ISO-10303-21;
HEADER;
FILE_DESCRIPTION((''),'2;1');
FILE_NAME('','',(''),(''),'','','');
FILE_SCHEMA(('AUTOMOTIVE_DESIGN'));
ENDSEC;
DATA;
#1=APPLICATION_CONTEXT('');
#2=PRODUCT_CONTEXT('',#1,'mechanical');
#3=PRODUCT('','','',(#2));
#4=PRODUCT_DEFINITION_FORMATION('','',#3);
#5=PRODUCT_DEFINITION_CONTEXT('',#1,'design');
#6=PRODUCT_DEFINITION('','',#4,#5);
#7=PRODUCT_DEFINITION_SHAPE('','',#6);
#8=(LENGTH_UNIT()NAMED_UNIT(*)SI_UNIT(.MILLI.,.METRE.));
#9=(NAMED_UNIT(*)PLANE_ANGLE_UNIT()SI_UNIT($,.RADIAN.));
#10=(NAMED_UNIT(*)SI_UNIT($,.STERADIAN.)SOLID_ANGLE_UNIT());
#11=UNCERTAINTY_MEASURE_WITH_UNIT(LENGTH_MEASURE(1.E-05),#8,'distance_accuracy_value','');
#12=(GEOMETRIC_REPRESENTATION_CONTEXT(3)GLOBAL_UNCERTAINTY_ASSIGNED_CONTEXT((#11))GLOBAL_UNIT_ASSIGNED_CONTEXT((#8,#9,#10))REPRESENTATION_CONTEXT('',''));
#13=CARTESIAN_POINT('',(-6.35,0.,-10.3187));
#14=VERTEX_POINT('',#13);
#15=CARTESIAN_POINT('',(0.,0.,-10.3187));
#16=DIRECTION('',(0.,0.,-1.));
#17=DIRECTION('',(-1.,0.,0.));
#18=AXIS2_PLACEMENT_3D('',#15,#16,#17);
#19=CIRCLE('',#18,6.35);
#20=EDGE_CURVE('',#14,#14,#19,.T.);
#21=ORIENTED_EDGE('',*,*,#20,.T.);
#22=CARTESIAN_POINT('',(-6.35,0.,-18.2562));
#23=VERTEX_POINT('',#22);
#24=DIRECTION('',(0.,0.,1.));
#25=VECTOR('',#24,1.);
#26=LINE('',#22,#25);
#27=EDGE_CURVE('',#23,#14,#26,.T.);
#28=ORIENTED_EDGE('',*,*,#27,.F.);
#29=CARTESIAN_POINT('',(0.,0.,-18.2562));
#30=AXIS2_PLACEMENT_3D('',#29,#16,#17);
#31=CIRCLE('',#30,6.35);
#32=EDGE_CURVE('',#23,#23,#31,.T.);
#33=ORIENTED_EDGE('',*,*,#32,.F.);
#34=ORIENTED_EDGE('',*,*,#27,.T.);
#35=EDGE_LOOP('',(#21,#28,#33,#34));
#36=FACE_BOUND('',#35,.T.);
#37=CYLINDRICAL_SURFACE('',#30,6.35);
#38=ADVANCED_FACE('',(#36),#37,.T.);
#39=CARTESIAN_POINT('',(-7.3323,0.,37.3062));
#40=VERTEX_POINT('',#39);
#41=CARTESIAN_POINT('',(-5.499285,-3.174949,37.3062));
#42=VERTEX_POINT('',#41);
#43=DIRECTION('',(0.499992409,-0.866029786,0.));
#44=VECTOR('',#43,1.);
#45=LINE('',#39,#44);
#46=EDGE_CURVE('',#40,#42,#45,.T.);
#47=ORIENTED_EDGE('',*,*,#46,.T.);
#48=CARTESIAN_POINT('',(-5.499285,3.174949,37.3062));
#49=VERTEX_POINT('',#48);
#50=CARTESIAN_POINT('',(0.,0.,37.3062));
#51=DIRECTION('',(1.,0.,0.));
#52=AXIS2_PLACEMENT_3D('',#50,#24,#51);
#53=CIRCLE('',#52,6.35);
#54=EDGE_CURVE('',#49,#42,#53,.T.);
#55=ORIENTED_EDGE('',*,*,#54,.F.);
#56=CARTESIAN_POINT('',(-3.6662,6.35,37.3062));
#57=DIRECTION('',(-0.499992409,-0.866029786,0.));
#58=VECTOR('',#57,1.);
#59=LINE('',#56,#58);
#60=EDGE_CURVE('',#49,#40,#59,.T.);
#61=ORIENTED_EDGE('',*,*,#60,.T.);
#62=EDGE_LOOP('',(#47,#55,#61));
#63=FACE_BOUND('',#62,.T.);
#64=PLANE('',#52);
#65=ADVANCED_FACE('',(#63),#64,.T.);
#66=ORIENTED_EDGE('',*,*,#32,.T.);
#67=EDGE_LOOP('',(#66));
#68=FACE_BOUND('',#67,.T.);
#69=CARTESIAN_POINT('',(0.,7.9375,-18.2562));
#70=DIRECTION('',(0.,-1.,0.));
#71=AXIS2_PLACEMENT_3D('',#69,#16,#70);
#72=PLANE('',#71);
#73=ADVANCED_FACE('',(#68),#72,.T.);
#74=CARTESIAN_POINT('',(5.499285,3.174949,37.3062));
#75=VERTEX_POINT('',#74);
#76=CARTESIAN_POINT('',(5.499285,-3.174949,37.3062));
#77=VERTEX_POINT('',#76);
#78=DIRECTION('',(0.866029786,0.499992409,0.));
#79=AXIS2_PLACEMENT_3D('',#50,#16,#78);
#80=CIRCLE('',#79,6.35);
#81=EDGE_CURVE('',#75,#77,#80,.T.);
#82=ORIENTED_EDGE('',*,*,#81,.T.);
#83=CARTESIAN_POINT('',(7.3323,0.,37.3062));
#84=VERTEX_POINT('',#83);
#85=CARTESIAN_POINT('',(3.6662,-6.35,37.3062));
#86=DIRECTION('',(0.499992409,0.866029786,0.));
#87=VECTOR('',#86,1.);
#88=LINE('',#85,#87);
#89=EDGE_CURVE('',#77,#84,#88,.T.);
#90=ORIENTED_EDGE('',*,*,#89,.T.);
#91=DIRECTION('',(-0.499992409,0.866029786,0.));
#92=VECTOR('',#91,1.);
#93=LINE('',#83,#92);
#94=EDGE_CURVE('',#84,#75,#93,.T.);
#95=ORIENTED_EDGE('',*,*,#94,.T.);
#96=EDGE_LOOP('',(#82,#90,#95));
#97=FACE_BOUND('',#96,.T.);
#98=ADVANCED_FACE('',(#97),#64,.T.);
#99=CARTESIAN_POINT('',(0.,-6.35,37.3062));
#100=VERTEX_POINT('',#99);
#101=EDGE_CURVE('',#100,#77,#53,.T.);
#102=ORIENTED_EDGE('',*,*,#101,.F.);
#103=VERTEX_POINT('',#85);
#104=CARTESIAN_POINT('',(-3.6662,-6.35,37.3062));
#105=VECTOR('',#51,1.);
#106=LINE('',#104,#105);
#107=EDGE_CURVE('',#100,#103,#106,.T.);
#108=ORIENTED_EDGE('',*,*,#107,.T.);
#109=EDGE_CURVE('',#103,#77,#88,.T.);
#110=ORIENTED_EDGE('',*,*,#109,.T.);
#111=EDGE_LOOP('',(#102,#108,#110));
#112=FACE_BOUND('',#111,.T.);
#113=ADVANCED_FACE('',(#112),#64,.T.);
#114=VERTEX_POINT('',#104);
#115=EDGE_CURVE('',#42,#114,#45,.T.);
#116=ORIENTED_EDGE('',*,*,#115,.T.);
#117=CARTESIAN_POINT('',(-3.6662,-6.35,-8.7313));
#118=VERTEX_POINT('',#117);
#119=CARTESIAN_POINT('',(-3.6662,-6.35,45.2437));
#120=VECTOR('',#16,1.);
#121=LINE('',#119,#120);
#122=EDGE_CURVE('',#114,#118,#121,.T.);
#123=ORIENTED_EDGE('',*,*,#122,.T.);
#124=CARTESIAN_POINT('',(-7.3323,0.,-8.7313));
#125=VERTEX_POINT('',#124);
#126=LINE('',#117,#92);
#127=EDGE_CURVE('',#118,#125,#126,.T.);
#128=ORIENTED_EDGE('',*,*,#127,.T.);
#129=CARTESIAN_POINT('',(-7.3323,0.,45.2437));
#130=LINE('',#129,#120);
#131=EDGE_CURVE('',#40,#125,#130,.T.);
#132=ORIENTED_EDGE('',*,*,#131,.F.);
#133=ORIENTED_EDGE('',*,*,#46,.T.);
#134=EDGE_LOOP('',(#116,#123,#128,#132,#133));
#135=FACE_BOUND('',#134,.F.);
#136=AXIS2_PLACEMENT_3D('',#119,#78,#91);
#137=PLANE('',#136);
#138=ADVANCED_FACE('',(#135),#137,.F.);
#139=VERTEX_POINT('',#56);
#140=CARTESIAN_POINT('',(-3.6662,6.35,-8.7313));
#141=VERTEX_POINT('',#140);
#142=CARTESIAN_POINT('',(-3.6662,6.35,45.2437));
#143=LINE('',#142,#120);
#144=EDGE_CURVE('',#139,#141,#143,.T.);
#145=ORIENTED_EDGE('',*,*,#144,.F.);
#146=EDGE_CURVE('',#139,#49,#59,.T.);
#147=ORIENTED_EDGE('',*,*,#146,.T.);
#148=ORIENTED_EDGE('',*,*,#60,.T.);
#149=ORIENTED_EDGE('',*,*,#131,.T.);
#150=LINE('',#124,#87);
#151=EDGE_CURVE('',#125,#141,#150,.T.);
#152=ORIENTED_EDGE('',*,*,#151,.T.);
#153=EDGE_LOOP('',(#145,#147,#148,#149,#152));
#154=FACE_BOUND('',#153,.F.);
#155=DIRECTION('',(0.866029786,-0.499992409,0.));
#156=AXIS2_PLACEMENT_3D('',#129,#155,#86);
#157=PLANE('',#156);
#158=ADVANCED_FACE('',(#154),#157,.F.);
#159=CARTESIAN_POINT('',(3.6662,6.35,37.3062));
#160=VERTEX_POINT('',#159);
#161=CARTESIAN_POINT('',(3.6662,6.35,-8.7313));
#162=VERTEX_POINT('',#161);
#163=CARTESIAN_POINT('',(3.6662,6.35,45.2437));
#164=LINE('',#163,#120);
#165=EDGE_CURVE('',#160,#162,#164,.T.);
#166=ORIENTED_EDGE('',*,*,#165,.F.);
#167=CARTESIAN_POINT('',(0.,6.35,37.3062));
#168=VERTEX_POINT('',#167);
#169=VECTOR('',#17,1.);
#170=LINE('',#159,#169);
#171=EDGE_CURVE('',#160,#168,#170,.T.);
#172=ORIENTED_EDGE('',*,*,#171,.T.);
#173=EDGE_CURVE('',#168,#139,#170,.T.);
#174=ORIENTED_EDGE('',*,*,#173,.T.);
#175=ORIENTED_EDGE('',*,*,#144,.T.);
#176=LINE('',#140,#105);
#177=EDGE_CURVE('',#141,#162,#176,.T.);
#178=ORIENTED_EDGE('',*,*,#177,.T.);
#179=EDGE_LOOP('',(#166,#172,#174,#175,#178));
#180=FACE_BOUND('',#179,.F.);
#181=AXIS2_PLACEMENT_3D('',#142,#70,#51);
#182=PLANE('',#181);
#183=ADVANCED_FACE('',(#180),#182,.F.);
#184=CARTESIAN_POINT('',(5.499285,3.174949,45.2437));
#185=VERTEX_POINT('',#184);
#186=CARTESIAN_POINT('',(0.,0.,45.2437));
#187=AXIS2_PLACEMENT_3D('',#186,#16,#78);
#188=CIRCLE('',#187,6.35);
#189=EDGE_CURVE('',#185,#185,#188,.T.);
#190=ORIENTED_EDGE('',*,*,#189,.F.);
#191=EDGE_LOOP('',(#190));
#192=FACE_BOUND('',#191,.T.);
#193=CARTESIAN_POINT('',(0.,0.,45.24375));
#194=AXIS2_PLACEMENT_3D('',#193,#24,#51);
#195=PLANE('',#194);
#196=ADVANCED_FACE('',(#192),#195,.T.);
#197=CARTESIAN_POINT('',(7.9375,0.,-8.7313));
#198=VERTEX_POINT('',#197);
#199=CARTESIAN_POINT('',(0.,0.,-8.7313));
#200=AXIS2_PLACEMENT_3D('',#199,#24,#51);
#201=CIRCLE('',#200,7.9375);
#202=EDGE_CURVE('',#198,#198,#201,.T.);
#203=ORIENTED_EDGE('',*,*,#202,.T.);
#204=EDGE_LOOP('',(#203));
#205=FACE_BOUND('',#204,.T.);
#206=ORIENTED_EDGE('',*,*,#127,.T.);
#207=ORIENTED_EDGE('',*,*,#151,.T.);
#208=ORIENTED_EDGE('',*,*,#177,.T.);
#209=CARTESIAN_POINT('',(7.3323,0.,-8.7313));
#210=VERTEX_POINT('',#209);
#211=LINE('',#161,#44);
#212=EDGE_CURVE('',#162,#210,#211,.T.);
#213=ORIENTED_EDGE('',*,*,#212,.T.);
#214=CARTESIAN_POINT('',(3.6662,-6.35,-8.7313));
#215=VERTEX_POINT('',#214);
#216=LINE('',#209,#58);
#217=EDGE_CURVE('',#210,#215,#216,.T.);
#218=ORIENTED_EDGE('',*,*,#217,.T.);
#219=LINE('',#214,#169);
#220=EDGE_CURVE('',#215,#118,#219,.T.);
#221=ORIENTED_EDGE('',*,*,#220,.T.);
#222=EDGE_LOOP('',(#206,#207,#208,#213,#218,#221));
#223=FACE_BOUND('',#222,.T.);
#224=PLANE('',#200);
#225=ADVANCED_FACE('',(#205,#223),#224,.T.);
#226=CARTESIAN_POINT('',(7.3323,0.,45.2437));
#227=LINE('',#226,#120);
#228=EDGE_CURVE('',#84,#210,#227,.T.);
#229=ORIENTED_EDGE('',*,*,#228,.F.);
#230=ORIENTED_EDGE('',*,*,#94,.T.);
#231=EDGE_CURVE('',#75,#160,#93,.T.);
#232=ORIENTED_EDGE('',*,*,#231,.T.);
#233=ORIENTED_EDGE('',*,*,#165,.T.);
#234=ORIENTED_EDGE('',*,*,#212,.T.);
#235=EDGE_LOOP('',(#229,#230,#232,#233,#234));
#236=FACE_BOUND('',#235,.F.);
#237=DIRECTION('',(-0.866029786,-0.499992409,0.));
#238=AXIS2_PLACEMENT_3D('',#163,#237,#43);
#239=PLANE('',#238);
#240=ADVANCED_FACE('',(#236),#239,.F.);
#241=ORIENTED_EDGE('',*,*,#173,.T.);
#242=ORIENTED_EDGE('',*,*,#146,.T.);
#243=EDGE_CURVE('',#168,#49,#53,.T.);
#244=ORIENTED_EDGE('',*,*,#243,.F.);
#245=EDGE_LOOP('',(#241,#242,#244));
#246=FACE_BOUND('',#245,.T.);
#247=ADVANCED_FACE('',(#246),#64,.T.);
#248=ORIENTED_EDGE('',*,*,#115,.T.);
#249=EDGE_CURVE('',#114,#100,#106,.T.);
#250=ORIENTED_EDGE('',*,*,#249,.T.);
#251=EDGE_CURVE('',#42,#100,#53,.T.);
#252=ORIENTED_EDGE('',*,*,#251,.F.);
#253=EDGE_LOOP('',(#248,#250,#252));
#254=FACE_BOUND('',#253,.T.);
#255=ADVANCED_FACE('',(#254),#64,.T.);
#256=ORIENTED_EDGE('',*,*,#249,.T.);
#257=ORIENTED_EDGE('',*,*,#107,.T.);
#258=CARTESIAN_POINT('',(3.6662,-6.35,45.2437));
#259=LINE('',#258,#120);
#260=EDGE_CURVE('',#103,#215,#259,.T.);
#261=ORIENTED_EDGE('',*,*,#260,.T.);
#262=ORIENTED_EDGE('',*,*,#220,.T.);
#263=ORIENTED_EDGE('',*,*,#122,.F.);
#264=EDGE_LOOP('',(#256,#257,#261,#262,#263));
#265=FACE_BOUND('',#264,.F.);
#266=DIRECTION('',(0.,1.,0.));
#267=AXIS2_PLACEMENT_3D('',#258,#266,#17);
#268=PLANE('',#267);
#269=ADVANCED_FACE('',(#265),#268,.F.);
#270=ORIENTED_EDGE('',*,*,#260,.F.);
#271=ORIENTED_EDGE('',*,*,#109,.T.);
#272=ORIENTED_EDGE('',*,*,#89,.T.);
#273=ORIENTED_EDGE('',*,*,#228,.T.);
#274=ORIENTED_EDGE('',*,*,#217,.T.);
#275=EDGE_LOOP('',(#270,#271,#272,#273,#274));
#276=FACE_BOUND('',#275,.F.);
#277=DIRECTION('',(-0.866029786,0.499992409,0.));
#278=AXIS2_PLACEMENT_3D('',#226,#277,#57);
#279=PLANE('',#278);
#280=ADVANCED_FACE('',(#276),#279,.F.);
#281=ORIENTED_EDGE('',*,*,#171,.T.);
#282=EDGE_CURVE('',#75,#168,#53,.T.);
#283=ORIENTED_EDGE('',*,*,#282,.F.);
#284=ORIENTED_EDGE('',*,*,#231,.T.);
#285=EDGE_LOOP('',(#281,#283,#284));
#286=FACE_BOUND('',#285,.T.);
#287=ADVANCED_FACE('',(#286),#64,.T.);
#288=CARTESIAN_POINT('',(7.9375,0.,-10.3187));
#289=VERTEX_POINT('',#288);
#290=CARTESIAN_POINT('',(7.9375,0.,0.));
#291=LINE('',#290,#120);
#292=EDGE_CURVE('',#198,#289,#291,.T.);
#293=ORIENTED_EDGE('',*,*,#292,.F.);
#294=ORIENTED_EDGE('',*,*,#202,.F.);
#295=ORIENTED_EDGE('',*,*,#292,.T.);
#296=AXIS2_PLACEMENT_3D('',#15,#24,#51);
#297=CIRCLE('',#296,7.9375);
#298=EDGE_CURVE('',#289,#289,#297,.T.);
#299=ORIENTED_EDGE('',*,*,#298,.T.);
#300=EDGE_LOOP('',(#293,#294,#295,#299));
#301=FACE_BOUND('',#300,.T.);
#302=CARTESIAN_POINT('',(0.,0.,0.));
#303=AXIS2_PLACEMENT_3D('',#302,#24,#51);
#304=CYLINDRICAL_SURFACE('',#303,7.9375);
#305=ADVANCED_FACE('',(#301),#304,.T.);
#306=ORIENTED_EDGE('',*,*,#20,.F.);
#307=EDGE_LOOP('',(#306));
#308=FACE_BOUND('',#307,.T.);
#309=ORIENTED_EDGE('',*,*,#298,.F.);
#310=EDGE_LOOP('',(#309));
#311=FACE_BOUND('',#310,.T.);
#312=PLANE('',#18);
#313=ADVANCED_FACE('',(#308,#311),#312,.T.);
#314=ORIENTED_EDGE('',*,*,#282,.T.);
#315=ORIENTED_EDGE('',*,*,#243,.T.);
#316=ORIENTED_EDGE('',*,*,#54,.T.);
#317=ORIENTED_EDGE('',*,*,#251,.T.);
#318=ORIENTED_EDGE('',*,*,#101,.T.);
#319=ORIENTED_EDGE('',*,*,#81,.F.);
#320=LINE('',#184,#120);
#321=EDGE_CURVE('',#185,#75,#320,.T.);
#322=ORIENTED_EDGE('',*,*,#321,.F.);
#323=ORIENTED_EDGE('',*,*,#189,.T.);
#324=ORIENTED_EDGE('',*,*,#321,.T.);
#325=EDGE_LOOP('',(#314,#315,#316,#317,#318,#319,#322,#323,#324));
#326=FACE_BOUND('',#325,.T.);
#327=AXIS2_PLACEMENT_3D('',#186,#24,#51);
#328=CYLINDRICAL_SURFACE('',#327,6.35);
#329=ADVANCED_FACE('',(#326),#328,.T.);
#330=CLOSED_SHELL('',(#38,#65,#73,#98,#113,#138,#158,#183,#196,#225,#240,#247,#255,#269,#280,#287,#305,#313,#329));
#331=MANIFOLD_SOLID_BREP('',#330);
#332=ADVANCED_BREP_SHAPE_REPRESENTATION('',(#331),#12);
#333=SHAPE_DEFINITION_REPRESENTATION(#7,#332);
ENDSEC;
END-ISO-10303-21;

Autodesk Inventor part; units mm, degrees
ref_plane "YZ Plane" through (0, 0, 0) normal (1, 0, 0) x (0, 1, 0)
ref_plane "XZ Plane" through (0, 0, 0) normal (0, 1, 0) x (-1, 0, 0)
ref_plane "XY Plane" through (0, 0, 0) normal (0, 0, 1) x (1, 0, 0)
sketch "Sketch1" plane through (0, 0, 0) normal (0, 0, 1) x (1, 0, 0)
  circle A0 centre (0, 0) radius 7.9375
  dimension "d0" = 15.875
extrude "Extrusion1" add sketch "Sketch1" along normal mid plane 90.4875
sketch "Sketch2" plane through (0, 0, 45.2437) normal (0, 0, 1) x (1, 0, 0)
  line L0 (-3.6662, 6.35) -> (3.6662, 6.35)
  line L1 (3.6662, 6.35) -> (7.3323, 0)
  line L2 (7.3323, 0) -> (3.6662, -6.35)
  line L3 (3.6662, -6.35) -> (-3.6662, -6.35)
  line L4 (-3.6662, -6.35) -> (-7.3323, 0)
  line L5 (-7.3323, 0) -> (-3.6662, 6.35)
  circle A0 centre (0, 0) radius 7.9375 projected
  point P0 (0, -6.35)
  point P1 (0, 6.35)
  dimension "d3" = 12.7
extrude "Extrusion2" cut sketch "Sketch2" against normal blind 53.975
sketch "Sketch3" plane through (0, 0, 45.2437) normal (0, 0, 1) x (1, 0, 0)
  circle A0 centre (0, 0) radius 6.35
  circle A1 centre (0, 0) radius 7.9375 projected
  line L0 (3.6662, 6.35) -> (-3.6662, 6.35) projected
  line L1 (7.3323, 0) -> (3.6662, 6.35) projected
  line L2 (3.6662, -6.35) -> (7.3323, 0) projected
  line L3 (-3.6662, -6.35) -> (3.6662, -6.35) projected
  line L4 (-7.3323, 0) -> (-3.6662, -6.35) projected
  line L5 (-3.6662, 6.35) -> (-7.3323, 0) projected
  point P0 (-5.4993, 3.175)
  point P1 (0, 6.35)
  point P2 (-5.4993, -3.175)
  point P3 (0, -6.35)
  point P4 (5.4993, -3.175)
  point P5 (5.4993, 3.175)
  dimension "d6" = 12.7
extrude "Extrusion3" cut sketch "Sketch3" against normal blind 7.9375 contours A0 L1 L2 | A0 L0 L1 | L2 L3 A0 | A0 L5 L0 | L3 L4 A0 | A0 L4 L5
sketch "Sketch4" plane through (0, 0, 0) normal (1, 0, 0) x (0, 1, 0)
  line L0 (7.9375, -18.2562) -> (-7.9375, -18.2562)
  line L1 (-7.9375, -18.2562) -> (-7.9375, -45.2437)
  line L2 (-7.9375, -45.2437) -> (7.9375, -45.2437)
  line L3 (7.9375, -45.2437) -> (7.9375, -18.2562)
  line L4 (7.9375, -45.2437) -> (-7.9375, -45.2437) construction
  line L5 (-7.9375, -45.2437) -> (-7.9375, -8.7312) construction
  line L6 (-7.9375, -8.7312) -> (-6.35, -8.7312) construction
  line L7 (-6.35, -8.7312) -> (-6.35, 37.3062) construction
  line L8 (-6.35, 37.3062) -> (-6.35, 45.2437) construction
  line L9 (-6.35, 45.2437) -> (6.35, 45.2437) construction
  line L10 (6.35, 45.2437) -> (6.35, 37.3062) construction
  line L11 (6.35, 37.3062) -> (6.35, -8.7312) construction
  line L12 (6.35, -8.7312) -> (7.9375, -8.7312) construction
  line L13 (7.9375, -8.7312) -> (7.9375, -45.2437) construction
  line L14 (-7.9375, -45.2437) -> (7.9375, -45.2437) construction
  point P0 (0, 0)
  dimension "d9" = 63.5
extrude "Extrusion4" cut sketch "Sketch4" along normal through all both and the other way through all
sketch "Sketch5" plane through (0, 0, -18.2562) normal (0, 0, -1) x (-1, 0, 0)
  circle A0 centre (0, 0) radius 7.9375 construction
  circle A1 centre (0, 0) radius 7.9375
  circle A2 centre (0, 0) radius 6.35
  point P0 (0, 0)
  dimension "d12" = 12.7
extrude "Extrusion5" cut sketch "Sketch5" against normal blind 7.9375
equation "\"d12\" = d6"
equation "\"d13\" = d7"
equation "\"d7\" = 7.9375"
properties part number "EL2-C2-001" material "Aluminum 6061"
